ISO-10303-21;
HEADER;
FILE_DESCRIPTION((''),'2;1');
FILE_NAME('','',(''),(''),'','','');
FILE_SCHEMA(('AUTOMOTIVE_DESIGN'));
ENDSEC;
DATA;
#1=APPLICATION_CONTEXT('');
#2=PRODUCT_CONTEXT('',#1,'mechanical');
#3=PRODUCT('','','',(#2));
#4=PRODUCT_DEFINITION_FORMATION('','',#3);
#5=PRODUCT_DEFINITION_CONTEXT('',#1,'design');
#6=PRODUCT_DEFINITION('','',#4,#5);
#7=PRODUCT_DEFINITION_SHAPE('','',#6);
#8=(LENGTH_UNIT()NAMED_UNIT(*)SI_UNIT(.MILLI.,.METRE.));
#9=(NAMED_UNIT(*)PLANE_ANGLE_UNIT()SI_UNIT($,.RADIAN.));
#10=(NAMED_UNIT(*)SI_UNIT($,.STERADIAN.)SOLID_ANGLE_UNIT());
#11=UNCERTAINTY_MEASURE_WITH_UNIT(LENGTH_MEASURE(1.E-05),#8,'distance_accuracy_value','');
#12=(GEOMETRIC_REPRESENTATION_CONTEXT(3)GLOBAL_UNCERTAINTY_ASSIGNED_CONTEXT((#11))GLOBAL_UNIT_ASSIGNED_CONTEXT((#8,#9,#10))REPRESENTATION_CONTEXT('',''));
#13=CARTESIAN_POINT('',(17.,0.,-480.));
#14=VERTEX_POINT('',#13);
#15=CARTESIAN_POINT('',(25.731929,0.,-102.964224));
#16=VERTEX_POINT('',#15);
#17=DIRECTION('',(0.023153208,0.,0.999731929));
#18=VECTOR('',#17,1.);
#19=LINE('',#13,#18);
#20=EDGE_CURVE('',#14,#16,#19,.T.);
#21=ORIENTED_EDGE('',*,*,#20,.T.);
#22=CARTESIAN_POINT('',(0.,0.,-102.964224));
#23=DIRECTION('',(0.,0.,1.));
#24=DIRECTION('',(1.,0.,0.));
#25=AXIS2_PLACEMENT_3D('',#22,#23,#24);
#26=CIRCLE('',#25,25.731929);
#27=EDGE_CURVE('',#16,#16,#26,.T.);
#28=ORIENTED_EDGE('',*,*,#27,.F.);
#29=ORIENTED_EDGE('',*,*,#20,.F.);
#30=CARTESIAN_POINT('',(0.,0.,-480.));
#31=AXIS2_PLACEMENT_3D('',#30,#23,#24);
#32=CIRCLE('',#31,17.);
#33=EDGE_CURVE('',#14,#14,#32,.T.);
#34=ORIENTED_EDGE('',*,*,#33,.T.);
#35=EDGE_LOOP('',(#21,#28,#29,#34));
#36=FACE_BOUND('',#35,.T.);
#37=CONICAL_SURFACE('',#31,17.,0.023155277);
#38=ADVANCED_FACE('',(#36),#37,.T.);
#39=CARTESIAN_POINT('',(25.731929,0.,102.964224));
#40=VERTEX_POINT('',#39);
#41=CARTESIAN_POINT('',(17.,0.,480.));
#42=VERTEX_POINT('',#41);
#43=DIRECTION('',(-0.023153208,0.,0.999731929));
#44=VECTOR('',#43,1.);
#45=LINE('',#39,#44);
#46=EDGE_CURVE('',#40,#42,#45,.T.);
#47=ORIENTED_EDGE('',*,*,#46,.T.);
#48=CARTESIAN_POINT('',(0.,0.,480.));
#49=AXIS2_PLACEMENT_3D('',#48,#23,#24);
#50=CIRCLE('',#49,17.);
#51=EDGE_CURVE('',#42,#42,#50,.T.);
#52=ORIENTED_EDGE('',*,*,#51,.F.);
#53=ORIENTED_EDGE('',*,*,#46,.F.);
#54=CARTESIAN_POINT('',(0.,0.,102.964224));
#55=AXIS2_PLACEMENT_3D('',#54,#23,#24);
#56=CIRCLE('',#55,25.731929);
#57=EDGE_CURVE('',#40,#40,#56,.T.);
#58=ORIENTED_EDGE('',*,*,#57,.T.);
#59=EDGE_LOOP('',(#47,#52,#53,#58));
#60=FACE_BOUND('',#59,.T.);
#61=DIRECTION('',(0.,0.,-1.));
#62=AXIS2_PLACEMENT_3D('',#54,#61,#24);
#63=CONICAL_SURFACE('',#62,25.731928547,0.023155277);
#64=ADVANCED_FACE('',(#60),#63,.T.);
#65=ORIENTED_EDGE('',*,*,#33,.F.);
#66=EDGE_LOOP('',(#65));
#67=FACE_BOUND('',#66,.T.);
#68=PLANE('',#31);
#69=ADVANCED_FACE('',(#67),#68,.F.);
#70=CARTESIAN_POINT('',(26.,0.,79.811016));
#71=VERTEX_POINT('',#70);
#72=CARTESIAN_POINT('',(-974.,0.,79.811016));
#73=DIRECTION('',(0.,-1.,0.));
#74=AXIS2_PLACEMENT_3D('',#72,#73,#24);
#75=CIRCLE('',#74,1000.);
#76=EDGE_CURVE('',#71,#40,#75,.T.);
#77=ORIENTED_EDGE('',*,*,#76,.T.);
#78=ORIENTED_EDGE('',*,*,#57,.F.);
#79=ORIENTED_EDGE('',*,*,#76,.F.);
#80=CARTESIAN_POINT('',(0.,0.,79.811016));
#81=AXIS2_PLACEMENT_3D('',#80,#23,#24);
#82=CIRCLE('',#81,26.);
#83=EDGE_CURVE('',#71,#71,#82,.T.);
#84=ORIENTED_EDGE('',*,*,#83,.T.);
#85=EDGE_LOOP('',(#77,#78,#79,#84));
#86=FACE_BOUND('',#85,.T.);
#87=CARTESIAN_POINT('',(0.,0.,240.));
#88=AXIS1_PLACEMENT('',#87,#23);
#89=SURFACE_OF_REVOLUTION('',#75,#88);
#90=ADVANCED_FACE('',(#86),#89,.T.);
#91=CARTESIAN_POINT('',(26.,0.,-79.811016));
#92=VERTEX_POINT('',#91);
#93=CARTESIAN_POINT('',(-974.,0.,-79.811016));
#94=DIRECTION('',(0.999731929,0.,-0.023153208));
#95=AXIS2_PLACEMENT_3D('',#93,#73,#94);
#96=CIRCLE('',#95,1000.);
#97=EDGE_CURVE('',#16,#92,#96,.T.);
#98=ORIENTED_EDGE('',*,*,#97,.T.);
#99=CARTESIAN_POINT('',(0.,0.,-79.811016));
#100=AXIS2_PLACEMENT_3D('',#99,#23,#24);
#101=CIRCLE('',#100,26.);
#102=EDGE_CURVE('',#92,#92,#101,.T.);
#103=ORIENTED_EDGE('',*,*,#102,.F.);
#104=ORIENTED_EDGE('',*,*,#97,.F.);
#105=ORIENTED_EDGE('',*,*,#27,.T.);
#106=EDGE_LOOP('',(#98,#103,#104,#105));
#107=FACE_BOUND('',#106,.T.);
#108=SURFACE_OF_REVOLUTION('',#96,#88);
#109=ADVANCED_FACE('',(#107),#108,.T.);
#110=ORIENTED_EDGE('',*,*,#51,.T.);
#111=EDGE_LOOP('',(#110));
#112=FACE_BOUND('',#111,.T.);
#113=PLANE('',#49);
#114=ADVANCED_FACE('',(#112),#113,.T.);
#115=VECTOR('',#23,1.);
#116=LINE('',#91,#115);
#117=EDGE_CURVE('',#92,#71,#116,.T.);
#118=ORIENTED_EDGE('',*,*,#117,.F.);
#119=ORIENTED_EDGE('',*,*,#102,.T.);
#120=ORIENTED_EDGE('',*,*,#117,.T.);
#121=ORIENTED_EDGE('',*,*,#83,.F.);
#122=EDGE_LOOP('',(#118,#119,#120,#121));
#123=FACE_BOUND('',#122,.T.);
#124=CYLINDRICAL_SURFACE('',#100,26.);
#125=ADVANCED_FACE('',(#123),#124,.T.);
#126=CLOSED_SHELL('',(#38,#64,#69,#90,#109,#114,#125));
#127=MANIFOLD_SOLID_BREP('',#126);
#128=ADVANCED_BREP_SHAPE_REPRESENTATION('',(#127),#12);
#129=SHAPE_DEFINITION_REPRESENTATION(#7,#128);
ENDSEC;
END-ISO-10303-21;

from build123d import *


# Not quite as in the source:
# - a feature names something its author has since deleted; it is built from what else it names


with BuildPart() as f1:
    # F0 (on Front) → F1 (revolve)
    with BuildSketch(Plane.XZ):
        with BuildLine():
            Line((0, 480), (0, 0))
            Line((0, 0), (0, -480))
            Line((0, -480), (17, -480))
            Line((17, -480), (25.7319285466, -102.9642244203))
            ThreePointArc((25.7319285466, -102.9642244203), (25.9329798908, -91.3883962972), (26, -79.8110163396))
            Line((26, -79.8110163396), (26, 0))
            Line((26, 0), (26, 79.8110163396))
            ThreePointArc((26, 79.8110163396), (25.9329798908, 91.3883962972), (25.7319285466, 102.9642244203))
            Line((25.7319285466, 102.9642244203), (17, 480))
            Line((17, 480), (0, 480))
        make_face()
    revolve(axis=Axis((0, 0, 240), (0, 0, 1)))


solid = f1.part
